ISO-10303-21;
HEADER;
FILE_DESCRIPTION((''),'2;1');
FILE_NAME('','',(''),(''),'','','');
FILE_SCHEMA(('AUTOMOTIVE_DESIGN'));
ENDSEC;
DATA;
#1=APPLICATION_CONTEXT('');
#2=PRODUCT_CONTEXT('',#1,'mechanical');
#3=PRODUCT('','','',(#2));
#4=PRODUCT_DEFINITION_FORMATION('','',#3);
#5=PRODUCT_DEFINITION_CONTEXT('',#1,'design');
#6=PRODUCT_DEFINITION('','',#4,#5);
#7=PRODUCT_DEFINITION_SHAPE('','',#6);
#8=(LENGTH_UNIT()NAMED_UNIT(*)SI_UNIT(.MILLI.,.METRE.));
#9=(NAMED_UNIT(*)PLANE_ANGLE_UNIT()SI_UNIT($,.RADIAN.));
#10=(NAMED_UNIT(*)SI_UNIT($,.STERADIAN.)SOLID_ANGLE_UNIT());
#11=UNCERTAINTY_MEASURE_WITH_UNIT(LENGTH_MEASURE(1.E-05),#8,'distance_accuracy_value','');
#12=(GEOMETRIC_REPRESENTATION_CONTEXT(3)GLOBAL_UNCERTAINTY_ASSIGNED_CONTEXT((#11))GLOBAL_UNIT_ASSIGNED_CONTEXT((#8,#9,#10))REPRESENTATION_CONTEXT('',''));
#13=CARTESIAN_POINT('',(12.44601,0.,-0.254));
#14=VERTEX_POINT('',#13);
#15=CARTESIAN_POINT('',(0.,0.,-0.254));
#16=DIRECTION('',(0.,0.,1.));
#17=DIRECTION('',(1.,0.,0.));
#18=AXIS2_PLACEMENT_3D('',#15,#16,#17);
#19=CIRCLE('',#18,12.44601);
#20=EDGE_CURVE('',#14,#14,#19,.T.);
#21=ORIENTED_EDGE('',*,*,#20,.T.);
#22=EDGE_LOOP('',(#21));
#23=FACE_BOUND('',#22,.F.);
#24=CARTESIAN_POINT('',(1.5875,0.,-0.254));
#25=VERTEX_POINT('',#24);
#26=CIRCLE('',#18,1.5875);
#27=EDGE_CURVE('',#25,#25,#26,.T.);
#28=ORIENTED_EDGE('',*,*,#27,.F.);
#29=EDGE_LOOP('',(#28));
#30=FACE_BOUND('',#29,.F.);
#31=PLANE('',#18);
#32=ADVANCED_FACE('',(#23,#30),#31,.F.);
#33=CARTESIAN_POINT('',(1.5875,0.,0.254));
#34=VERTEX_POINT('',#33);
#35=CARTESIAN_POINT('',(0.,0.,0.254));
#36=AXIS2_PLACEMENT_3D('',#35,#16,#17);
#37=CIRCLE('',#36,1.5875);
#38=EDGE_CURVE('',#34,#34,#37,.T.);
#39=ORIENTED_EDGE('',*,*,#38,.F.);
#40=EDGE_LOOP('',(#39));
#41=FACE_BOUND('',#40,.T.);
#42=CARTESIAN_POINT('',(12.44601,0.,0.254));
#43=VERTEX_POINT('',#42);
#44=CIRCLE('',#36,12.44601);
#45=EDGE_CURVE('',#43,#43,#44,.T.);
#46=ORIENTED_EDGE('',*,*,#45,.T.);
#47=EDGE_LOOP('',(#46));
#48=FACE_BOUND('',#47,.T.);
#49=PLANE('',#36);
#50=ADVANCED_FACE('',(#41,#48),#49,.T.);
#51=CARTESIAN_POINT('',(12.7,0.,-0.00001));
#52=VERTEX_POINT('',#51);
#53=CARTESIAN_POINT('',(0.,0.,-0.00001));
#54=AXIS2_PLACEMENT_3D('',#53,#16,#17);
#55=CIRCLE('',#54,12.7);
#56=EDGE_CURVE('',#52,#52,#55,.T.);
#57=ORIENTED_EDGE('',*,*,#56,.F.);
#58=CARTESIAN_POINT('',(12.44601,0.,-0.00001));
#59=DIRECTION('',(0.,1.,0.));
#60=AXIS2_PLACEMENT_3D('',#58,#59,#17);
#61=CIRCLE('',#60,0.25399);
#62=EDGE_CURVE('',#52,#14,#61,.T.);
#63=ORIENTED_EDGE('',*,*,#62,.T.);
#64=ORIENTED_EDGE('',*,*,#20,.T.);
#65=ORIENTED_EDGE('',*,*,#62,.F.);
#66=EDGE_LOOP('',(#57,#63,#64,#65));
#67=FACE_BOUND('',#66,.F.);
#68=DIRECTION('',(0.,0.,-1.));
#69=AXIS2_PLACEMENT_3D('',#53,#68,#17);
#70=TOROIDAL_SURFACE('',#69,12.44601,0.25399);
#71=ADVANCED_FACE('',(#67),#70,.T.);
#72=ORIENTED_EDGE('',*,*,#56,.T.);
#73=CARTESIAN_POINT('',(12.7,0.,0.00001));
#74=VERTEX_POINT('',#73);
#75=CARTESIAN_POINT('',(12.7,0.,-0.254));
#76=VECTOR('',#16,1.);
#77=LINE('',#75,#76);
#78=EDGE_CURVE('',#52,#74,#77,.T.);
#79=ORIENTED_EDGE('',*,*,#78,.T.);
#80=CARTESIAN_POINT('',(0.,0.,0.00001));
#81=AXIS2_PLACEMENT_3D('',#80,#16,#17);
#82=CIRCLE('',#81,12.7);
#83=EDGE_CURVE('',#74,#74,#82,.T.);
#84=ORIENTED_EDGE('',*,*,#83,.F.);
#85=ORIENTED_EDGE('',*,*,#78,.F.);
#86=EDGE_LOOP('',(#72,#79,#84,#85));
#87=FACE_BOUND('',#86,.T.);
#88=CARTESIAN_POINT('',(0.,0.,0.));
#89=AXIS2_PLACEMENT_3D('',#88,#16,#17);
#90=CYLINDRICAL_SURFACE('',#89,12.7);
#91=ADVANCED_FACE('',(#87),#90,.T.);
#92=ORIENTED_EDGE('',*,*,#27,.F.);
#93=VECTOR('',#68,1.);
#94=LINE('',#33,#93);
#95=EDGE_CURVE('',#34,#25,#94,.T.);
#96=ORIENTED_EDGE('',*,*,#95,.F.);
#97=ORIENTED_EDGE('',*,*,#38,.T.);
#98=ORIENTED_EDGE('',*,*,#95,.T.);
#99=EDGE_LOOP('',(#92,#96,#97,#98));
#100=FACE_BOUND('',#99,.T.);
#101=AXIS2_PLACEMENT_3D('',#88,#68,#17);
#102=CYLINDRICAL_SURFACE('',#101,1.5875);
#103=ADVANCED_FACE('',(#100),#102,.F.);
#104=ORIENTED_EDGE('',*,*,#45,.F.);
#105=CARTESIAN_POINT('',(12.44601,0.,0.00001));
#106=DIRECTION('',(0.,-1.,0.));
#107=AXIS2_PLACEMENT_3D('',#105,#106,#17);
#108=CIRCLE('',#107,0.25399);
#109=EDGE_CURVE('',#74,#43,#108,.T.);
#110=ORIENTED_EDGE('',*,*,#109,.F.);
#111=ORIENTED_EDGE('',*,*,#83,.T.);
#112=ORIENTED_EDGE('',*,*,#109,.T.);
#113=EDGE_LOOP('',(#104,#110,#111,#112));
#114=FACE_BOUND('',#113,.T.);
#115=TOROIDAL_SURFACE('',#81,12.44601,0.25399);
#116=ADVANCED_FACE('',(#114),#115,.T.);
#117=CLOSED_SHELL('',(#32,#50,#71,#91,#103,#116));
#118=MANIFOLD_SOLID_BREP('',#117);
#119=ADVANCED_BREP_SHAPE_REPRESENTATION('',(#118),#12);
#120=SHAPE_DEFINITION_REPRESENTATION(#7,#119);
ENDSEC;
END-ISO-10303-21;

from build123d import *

# Parameters (mm, degrees)
F0_R     = 12.7
F0_R_2   = 1.5875
F1_DEPTH = 0.254
F2_R     = 0.25399


# Not quite as in the source:
# - a fillet or chamfer is up to 0.001 mm smaller than in the source, because OpenCascade refuses the exact size


with BuildPart() as f1:
    # F0 (on Top) → F1 (new body, symmetric)
    with BuildSketch(Plane.XY):
        Circle(F0_R)
        Circle(F0_R_2, mode=Mode.SUBTRACT)
    extrude(amount=F1_DEPTH, both=True)

    # F2 (radius 0.254 in the source; OpenCascade refuses exactly that, so slightly less here)
    f2_edges = [f1.edges().sort_by_distance(p)[0] for p in [
        (-12.7, 0, 0.254),
        (-12.7, 0, -0.254),
    ]]
    fillet(f2_edges, radius=F2_R)


solid = f1.part
